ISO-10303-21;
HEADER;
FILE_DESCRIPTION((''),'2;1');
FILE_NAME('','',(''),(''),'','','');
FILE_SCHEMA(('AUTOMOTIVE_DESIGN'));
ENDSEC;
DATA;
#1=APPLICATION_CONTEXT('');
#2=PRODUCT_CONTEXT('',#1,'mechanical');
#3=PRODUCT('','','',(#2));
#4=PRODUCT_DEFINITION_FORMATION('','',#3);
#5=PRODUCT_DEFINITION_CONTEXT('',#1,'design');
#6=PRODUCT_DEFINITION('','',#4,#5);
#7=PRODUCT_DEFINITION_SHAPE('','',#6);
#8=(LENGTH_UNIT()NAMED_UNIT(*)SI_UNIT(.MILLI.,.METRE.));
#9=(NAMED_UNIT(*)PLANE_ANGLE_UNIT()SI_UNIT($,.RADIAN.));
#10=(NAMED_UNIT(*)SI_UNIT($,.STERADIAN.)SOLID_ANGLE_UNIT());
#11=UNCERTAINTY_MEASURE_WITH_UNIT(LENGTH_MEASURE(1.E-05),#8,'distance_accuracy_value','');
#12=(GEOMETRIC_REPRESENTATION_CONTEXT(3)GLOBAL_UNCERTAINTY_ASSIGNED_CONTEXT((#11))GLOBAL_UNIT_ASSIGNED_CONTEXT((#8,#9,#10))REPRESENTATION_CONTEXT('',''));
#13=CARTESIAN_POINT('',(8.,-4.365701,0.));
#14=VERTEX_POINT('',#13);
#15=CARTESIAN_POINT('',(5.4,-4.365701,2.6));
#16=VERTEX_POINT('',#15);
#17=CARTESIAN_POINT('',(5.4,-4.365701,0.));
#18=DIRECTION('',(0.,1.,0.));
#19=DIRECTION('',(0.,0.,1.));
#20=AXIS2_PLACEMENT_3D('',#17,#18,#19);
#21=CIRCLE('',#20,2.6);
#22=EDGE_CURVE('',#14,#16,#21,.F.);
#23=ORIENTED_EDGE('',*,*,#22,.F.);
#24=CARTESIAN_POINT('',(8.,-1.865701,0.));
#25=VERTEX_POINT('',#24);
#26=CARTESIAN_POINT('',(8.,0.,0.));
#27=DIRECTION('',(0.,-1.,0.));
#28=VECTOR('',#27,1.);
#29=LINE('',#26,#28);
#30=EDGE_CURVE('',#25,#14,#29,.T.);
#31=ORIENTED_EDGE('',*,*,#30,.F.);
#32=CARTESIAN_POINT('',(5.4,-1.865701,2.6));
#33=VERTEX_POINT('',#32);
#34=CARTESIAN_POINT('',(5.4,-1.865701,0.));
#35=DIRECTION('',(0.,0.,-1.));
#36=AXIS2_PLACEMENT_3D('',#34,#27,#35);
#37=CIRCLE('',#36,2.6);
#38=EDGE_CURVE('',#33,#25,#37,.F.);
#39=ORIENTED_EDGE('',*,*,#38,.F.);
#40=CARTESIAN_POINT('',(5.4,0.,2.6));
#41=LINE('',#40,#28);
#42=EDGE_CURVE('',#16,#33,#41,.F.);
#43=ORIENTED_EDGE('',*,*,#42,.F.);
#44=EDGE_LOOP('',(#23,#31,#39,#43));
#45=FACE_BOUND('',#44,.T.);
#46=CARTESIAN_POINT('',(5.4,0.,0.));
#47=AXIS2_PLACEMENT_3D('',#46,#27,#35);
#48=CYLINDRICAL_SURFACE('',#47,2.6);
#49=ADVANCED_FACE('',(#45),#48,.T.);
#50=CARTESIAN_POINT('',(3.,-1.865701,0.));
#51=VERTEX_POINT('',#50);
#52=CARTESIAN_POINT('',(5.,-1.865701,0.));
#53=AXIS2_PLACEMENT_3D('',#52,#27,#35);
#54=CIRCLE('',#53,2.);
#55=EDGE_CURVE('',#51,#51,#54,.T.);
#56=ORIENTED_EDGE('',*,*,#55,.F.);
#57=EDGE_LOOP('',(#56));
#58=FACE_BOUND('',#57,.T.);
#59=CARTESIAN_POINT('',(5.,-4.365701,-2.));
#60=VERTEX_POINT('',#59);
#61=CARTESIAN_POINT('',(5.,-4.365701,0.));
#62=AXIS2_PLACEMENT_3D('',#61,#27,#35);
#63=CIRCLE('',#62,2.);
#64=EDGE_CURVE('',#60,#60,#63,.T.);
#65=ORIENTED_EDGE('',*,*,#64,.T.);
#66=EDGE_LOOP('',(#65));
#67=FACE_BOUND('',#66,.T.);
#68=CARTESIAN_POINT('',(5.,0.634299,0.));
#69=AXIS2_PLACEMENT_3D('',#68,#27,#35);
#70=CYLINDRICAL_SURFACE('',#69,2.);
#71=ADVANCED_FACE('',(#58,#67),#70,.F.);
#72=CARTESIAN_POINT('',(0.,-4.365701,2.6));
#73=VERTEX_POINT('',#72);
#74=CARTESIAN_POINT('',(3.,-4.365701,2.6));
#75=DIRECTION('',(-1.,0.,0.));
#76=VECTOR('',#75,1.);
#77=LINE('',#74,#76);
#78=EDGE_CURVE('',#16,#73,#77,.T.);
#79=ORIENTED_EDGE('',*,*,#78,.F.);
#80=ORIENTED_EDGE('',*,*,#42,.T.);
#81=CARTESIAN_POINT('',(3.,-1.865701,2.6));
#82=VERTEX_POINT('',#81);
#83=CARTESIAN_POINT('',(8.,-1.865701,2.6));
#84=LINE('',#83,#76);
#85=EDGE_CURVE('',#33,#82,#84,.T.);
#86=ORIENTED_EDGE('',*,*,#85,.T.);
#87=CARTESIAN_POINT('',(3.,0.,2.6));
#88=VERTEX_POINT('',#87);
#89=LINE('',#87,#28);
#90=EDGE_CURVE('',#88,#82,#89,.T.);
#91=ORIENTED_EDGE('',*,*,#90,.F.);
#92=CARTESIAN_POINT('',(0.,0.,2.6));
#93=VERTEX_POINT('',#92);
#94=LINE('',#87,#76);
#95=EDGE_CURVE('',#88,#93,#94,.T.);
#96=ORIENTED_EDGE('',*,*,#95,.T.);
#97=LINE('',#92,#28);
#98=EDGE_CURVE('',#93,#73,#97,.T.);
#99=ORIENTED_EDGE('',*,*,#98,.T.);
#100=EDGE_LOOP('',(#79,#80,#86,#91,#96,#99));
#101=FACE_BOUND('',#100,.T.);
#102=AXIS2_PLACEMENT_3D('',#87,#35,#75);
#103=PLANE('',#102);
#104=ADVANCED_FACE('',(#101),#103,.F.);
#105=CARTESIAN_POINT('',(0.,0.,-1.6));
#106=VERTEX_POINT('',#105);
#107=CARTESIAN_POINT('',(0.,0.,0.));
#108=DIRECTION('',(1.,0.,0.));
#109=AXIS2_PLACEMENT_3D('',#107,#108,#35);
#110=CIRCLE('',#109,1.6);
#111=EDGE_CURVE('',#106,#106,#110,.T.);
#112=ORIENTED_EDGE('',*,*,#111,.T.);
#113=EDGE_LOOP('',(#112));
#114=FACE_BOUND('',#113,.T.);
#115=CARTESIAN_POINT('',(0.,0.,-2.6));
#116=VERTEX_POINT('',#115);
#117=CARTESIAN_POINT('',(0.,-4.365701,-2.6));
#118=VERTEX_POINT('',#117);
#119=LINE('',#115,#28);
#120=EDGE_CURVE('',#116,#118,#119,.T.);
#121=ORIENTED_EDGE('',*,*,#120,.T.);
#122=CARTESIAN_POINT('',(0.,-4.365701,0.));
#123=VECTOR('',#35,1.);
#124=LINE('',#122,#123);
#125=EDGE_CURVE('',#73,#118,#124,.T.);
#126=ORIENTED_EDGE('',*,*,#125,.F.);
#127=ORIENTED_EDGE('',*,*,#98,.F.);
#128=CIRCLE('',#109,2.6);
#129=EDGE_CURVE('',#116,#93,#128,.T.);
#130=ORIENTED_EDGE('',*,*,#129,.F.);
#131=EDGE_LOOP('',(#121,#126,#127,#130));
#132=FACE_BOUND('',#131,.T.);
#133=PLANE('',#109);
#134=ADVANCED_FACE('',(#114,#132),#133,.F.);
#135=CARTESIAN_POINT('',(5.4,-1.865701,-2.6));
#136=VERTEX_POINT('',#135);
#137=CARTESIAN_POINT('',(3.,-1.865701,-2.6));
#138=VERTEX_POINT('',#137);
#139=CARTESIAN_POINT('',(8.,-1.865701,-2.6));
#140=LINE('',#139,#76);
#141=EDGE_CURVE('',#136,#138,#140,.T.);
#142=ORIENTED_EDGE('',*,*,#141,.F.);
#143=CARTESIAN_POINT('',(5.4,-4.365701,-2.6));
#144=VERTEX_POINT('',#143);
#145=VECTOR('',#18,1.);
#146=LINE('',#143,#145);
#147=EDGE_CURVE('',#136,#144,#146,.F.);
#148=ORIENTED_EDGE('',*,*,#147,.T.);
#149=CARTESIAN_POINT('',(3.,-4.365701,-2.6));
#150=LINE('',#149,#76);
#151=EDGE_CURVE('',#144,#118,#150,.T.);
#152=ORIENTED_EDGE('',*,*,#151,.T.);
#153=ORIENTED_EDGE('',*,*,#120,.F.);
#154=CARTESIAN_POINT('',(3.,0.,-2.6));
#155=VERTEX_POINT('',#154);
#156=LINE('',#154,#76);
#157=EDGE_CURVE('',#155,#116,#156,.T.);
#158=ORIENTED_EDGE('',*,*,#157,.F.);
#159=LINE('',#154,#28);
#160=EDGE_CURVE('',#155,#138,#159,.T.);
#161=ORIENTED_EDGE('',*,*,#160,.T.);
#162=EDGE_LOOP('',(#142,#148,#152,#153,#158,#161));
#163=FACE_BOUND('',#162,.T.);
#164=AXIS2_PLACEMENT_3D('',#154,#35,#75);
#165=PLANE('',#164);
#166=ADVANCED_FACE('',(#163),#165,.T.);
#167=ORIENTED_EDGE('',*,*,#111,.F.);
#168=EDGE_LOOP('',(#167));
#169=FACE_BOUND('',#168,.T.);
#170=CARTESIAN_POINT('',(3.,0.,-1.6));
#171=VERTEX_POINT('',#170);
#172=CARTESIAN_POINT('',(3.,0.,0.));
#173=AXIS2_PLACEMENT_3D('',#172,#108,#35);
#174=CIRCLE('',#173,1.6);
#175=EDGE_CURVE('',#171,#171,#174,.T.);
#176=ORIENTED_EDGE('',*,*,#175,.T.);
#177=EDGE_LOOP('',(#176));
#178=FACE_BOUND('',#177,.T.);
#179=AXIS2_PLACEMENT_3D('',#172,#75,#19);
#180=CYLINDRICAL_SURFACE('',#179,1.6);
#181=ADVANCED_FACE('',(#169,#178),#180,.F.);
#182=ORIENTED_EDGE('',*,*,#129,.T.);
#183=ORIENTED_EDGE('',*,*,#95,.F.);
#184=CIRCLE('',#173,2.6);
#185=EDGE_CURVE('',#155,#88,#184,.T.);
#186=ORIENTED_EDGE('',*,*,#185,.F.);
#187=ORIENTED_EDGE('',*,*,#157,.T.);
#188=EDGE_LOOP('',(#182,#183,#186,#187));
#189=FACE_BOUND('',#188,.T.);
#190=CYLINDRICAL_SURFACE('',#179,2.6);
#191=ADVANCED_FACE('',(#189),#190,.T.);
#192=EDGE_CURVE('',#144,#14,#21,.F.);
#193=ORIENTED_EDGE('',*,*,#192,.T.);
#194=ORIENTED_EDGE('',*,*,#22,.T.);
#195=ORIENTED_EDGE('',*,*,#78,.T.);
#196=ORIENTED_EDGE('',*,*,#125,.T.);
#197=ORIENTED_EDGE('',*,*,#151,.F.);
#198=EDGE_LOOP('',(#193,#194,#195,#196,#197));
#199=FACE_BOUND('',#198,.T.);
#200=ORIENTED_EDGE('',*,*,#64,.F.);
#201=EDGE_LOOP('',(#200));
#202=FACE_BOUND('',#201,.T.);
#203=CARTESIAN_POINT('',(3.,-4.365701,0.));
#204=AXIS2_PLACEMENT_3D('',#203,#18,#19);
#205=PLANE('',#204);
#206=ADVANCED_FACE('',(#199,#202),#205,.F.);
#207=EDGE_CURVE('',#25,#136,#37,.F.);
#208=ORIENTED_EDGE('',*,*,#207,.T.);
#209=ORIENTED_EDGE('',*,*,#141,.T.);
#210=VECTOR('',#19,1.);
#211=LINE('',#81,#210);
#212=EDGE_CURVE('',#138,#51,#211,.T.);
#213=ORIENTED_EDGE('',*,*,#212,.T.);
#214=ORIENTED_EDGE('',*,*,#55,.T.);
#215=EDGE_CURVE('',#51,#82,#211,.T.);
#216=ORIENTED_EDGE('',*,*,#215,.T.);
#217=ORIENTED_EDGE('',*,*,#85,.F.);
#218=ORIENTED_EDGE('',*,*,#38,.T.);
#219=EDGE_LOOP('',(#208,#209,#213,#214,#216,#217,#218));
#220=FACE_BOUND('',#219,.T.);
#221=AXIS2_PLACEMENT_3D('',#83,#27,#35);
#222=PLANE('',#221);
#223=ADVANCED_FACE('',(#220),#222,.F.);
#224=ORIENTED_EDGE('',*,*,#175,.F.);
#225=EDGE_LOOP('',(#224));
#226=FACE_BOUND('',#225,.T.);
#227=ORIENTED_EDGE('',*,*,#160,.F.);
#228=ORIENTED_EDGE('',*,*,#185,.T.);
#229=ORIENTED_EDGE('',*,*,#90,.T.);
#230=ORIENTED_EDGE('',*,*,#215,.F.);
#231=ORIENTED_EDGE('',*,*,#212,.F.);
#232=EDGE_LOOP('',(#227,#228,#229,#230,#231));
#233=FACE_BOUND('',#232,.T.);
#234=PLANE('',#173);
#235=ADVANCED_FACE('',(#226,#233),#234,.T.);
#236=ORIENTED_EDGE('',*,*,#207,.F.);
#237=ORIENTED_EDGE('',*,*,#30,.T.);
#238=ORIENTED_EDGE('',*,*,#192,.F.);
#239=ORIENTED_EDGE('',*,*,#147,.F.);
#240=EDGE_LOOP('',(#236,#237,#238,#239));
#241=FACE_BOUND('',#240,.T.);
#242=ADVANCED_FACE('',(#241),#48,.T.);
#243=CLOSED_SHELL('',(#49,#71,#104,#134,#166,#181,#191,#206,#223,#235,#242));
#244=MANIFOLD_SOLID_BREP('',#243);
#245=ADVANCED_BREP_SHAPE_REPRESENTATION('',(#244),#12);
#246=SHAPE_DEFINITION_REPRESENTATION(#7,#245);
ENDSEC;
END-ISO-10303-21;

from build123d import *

# Parameters (mm, degrees)
SKETCH1_R           = 1.6
BOSS_EXTRUDE1_DEPTH = 3
SKETCH2_W           = 5.2
SKETCH2_H           = 2.5
BOSS_EXTRUDE2_DEPTH = 5
FILLET1_R           = 2.6
SKETCH3_R           = 2
CUT_EXTRUDE1_DEPTH  = 5


with BuildPart() as part:
    # Sketch1 → Boss-Extrude1 (new body)
    with BuildSketch(Plane(origin=(0, 0, 0), x_dir=(0, 0, -1), z_dir=(1, 0, 0))):
        with BuildLine():
            ThreePointArc((2.6, 0), (0, 2.6), (-2.6, 0))
            Line((-2.6, 0), (-2.6, -4.365701483))
            Line((-2.6, -4.365701483), (2.6, -4.365701483))
            Line((2.6, -4.365701483), (2.6, 0))
        make_face()
        Circle(SKETCH1_R, mode=Mode.SUBTRACT)
    extrude(amount=BOSS_EXTRUDE1_DEPTH)

    # Sketch2 → Boss-Extrude2 (add)
    with BuildSketch(Plane(origin=(3, 0, 0), x_dir=(0, 0, -1), z_dir=(1, 0, 0))):
        with Locations((0, -3.115701483)):
            Rectangle(SKETCH2_W, SKETCH2_H)
    extrude(amount=BOSS_EXTRUDE2_DEPTH)

    # Fillet1
    fillet1_edges = [part.edges().sort_by_distance(p)[0] for p in [
        (8, -3.115701483, -2.6),
        (8, -3.115701483, 2.6),
    ]]
    fillet(fillet1_edges, radius=FILLET1_R - 0.0001)  # a hair under: the kernel refuses the full size

    # Sketch3 → Cut-Extrude1 (cut)
    with BuildSketch(Plane.XZ.offset(4.365701483)):
        with Locations(Location((5, 0, 0), (0, 0, 270))):
            Circle(SKETCH3_R)
    extrude(amount=-CUT_EXTRUDE1_DEPTH, mode=Mode.SUBTRACT)


solid = part.part
